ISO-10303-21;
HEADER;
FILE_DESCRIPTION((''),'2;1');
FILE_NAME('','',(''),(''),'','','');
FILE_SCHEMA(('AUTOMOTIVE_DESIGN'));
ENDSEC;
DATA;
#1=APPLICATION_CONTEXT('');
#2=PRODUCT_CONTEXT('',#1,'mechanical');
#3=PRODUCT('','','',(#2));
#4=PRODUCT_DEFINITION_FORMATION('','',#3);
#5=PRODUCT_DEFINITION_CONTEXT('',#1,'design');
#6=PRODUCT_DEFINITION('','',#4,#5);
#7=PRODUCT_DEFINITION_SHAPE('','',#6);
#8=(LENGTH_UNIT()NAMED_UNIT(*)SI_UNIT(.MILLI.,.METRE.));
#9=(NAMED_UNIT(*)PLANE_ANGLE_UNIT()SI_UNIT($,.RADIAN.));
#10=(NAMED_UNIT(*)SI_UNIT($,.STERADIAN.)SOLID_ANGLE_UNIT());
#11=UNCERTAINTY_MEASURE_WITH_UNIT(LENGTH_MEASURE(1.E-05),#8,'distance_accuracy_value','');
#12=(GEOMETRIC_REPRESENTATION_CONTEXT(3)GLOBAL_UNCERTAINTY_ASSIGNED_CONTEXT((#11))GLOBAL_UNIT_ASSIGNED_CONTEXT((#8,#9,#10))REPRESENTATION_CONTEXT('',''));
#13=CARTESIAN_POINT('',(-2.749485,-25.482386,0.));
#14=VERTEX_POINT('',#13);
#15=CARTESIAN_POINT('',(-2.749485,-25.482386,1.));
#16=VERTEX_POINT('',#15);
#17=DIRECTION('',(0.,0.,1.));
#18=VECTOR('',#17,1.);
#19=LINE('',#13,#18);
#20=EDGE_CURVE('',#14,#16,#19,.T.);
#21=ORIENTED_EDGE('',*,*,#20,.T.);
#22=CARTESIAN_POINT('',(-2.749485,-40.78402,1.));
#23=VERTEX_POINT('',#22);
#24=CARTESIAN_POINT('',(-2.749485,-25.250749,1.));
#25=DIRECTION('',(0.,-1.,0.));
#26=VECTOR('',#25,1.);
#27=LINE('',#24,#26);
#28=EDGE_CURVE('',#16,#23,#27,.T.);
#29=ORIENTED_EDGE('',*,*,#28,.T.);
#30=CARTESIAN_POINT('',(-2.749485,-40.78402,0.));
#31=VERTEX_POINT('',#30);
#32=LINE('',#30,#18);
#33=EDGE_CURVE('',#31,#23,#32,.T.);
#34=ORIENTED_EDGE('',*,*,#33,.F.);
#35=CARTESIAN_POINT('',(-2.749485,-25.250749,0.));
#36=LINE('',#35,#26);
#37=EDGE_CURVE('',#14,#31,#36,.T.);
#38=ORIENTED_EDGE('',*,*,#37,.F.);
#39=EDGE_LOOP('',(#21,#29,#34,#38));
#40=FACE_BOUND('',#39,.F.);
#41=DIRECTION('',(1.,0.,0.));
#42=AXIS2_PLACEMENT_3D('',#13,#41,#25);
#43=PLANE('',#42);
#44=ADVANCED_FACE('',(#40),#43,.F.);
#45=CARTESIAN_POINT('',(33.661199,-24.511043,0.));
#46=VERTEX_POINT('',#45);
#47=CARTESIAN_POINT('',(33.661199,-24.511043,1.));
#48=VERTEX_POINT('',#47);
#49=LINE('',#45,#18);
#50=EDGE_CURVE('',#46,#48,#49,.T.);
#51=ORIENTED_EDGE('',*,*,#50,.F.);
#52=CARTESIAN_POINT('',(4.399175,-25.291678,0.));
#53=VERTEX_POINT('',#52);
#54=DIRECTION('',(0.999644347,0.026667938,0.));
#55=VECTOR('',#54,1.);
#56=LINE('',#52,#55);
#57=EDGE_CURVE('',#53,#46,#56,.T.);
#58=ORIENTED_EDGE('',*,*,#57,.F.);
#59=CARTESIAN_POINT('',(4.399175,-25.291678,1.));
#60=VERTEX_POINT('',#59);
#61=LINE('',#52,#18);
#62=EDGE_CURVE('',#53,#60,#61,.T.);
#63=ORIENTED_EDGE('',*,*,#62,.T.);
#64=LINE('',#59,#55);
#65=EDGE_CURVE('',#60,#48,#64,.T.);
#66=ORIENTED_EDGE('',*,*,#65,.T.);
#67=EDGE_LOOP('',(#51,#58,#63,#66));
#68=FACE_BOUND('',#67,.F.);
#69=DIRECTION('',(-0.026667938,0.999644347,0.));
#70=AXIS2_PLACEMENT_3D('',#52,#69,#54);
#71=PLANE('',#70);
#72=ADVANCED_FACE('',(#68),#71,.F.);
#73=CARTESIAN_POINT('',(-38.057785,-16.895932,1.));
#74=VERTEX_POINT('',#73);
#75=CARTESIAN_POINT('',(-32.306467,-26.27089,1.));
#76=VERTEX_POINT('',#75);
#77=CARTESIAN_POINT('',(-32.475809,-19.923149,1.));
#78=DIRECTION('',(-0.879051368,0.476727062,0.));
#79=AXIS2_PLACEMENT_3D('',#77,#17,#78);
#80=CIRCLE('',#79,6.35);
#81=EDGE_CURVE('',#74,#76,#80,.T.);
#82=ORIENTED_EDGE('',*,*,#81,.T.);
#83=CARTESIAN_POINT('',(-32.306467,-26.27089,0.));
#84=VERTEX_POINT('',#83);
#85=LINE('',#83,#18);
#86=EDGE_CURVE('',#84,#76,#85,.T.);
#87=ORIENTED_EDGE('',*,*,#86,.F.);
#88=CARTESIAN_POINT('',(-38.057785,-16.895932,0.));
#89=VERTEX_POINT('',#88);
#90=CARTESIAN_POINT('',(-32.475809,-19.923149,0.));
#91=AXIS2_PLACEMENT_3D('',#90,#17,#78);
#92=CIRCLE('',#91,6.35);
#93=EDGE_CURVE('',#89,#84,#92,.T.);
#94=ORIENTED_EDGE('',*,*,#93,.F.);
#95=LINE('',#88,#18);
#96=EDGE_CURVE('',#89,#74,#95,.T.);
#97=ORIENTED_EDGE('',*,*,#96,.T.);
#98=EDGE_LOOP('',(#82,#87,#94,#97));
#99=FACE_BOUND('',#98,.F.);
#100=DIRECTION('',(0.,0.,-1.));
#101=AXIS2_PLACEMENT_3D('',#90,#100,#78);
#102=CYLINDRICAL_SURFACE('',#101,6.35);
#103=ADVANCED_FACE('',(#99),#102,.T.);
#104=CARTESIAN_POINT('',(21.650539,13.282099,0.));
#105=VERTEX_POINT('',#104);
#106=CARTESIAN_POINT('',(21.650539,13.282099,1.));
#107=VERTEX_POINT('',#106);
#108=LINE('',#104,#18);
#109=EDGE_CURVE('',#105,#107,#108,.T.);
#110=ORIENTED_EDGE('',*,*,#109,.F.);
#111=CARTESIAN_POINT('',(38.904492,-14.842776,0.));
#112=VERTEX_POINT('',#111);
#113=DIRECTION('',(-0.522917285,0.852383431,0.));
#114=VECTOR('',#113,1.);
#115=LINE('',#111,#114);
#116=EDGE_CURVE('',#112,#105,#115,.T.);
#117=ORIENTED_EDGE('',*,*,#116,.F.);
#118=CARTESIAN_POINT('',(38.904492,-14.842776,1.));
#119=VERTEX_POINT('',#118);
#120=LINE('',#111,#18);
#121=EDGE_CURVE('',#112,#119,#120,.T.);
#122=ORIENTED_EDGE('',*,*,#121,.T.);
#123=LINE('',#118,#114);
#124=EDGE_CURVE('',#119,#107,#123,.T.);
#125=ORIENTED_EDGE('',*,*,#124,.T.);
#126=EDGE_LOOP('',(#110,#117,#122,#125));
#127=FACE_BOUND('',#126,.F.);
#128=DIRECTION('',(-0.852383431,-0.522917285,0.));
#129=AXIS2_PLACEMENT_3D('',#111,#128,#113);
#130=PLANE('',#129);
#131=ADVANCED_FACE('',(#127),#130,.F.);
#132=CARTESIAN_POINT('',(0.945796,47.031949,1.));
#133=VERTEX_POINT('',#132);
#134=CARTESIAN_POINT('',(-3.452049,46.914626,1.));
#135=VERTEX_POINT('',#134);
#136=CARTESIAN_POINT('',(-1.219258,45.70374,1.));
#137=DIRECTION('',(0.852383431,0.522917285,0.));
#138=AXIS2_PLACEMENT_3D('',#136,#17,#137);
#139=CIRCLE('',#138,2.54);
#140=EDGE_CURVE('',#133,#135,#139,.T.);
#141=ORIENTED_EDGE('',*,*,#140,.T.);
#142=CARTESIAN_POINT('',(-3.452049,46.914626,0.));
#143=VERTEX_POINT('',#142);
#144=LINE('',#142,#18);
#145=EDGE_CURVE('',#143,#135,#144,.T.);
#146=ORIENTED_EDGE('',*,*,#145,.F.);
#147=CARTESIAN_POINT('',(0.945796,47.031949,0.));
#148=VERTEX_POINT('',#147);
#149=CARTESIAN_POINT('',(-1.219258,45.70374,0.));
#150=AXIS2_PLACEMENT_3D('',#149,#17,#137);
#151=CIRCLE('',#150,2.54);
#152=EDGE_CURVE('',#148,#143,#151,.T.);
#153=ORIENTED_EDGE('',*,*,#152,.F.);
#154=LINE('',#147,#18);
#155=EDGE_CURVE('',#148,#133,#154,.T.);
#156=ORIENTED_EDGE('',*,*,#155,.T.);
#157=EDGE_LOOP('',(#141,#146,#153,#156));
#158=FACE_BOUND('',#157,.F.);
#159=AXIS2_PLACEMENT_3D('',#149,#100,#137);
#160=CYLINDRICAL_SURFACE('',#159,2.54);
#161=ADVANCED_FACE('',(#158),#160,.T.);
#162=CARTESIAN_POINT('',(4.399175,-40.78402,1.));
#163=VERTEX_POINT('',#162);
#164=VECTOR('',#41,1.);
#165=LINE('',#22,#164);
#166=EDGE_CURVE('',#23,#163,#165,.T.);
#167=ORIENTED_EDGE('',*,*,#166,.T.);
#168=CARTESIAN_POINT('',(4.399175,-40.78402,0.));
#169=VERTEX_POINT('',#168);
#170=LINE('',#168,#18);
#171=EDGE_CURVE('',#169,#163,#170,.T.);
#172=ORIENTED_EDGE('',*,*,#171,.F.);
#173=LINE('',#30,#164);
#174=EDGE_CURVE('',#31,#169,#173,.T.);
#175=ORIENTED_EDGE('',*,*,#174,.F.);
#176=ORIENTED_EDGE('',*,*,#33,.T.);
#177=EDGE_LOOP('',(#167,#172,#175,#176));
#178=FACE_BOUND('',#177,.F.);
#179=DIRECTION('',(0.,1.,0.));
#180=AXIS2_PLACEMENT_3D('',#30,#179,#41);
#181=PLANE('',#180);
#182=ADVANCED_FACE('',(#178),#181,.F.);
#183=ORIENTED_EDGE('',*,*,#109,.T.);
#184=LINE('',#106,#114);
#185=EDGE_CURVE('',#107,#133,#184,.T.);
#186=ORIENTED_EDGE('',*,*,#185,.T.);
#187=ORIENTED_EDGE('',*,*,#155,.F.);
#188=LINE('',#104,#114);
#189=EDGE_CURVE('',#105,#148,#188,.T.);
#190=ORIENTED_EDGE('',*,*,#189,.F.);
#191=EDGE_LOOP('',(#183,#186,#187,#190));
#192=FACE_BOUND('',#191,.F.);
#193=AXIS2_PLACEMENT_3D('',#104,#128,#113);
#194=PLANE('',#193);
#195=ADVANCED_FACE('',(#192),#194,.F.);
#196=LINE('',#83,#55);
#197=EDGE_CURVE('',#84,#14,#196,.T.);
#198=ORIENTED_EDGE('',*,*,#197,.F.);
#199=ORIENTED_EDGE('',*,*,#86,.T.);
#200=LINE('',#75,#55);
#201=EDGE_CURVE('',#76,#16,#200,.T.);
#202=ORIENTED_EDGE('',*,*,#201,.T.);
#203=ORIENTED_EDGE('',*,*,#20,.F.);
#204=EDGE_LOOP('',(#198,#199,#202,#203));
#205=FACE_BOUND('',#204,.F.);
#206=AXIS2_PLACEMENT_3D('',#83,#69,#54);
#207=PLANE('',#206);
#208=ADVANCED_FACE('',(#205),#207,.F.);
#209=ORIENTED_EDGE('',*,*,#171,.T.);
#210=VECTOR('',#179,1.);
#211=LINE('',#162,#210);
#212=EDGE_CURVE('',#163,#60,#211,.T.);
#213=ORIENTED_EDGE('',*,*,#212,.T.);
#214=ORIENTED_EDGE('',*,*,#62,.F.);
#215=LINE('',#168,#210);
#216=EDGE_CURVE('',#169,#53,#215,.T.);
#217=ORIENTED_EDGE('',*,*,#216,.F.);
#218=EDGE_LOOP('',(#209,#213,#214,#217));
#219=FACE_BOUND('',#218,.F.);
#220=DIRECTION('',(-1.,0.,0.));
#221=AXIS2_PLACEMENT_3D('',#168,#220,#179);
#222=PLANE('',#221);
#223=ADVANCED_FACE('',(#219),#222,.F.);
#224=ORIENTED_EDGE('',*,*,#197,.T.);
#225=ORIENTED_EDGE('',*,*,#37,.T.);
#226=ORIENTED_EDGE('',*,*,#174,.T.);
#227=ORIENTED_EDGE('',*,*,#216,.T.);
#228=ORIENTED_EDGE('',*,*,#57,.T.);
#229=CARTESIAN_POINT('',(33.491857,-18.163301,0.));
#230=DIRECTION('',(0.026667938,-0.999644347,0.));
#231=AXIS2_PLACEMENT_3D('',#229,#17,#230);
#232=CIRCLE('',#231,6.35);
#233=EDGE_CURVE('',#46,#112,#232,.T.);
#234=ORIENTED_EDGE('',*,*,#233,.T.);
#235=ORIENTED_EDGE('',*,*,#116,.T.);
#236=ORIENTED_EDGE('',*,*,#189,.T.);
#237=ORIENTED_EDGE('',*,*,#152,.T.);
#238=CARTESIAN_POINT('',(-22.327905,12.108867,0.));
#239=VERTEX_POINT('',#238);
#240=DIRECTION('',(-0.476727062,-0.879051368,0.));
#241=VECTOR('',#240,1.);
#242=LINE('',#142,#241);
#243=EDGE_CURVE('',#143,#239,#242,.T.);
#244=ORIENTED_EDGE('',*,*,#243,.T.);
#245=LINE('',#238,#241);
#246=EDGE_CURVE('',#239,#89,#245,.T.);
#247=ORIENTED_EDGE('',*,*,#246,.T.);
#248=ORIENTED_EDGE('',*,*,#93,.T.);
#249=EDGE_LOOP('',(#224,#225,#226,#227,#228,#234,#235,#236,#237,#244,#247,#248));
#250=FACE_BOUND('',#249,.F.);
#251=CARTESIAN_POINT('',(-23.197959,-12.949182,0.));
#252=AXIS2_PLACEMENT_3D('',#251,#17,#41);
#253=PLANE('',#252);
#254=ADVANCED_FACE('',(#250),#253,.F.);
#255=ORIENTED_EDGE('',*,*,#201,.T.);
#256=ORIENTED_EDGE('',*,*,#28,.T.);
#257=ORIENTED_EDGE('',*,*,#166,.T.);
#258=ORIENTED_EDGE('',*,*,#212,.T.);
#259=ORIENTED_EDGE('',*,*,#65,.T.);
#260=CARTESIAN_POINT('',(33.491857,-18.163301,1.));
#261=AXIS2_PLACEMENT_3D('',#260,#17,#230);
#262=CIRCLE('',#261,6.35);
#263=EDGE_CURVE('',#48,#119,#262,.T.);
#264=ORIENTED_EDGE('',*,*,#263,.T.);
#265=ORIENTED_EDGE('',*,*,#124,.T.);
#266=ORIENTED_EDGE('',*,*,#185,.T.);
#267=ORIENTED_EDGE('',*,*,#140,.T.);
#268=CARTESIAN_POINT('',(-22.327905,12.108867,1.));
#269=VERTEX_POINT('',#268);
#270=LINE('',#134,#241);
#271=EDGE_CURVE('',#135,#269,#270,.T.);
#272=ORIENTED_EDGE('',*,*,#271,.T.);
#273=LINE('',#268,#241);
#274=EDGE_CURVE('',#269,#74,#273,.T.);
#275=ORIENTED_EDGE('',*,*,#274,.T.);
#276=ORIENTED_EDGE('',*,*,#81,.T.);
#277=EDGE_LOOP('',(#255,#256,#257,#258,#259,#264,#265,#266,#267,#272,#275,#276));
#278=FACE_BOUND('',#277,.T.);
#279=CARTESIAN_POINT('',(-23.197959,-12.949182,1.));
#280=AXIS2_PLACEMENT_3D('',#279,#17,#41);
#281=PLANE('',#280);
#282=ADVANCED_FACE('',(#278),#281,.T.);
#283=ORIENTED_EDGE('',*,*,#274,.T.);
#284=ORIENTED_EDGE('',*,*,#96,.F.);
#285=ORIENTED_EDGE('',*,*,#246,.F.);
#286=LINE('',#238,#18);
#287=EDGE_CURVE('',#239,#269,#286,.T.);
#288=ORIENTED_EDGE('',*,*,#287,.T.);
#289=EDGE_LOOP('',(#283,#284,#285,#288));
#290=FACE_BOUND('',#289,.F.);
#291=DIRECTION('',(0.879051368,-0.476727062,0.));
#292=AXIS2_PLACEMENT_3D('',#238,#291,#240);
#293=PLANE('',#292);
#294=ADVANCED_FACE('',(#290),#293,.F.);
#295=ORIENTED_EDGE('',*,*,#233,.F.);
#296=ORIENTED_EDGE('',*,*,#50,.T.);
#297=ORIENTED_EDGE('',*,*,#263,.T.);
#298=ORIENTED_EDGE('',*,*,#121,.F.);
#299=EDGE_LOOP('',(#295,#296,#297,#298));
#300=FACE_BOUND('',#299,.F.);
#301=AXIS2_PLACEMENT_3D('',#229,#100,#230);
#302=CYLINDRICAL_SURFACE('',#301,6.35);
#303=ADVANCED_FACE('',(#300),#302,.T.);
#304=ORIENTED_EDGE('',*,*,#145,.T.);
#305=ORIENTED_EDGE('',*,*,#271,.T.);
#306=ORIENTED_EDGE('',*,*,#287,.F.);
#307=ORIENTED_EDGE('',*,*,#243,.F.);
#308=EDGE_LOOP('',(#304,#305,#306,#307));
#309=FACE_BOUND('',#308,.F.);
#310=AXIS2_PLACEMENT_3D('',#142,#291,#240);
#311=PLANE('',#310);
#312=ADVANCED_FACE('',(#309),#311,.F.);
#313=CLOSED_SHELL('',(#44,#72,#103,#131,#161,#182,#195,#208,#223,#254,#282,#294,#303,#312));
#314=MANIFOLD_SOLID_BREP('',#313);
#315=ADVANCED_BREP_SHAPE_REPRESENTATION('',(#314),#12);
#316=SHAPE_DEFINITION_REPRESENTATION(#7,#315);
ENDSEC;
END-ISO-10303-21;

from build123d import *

# Parameters (mm, degrees)
F1_DEPTH = 1


# Not quite as in the source:
# - a feature names something its author has since deleted; it is built from what else it names


with BuildPart() as f1:
    # F0 (on Top) → F1 (new body)
    with BuildSketch(Plane.XY):
        with BuildLine():
            Line((-2.7494849637, -25.4823859731), (-2.7494849637, -25.250749146))
            ThreePointArc((-2.7494849637, -25.250749146), (-22.497868801, -11.7900763108), (-22.3279049811, 12.1088669642))
            Line((-22.3279049811, 12.1088669642), (-38.057784897, -16.8959317215))
            ThreePointArc((-38.057784897, -16.8959317215), (-37.8884434924, -23.2436733268), (-32.3064673032, -26.2708901713))
            Line((-32.3064673032, -26.2708901713), (-2.7494849637, -25.4823859731))
        make_face()
        with BuildLine():
            ThreePointArc((25.4, 0), (19.4537790742, -16.3312730591), (4.3991748244, -25.0161400073))
            Line((4.3991748244, -25.0161400073), (4.3991748244, -25.2916781332))
            Line((4.3991748244, -25.2916781332), (33.6611985399, -24.5110426718))
            ThreePointArc((33.6611985399, -24.5110426718), (39.0738333245, -21.1905179108), (38.9044919199, -14.8427763054))
            Line((38.9044919199, -14.8427763054), (21.6505391613, 13.2820990068))
            ThreePointArc((21.6505391613, 13.2820990068), (24.4446690988, 6.9005907466), (25.4, 0))
        make_face()
        with BuildLine():
            ThreePointArc((-22.3279049811, 12.1088669642), (-22.497868801, -11.7900763108), (-2.7494849637, -25.250749146))
            ThreePointArc((-2.7494849637, -25.250749146), (0.8331443579, -25.3863323558), (4.3991748244, -25.0161400073))
            ThreePointArc((4.3991748244, -25.0161400073), (19.4537790742, -16.3312730591), (25.4, 0))
            ThreePointArc((25.4, 0), (24.4446690988, 6.9005907466), (21.6505391613, 13.2820990068))
            ThreePointArc((21.6505391613, 13.2820990068), (-0.6773658317, 25.3909664158), (-22.3279049811, 12.1088669642))
        make_face()
        with BuildLine():
            Line((-3.4520485887, 46.9146262965), (-22.3279049811, 12.1088669642))
            ThreePointArc((-22.3279049811, 12.1088669642), (-0.6773658317, 25.3909664158), (21.6505391613, 13.2820990068))
            Line((21.6505391613, 13.2820990068), (0.9457958008, 47.0319494631))
            ThreePointArc((0.9457958008, 47.0319494631), (-1.2869946749, 48.2428362009), (-3.4520485887, 46.9146262965))
        make_face()
        with BuildLine():
            ThreePointArc((4.3991748244, -25.0161400073), (0.8331443579, -25.3863323558), (-2.7494849637, -25.250749146))
            Line((-2.7494849637, -25.250749146), (-2.7494849637, -25.4823859731))
            Line((-2.7494849637, -25.4823859731), (-2.7494849637, -40.7840199769))
            Line((-2.7494849637, -40.7840199769), (4.3991748244, -40.7840199769))
            Line((4.3991748244, -40.7840199769), (4.3991748244, -25.2916781332))
            Line((4.3991748244, -25.2916781332), (4.3991748244, -25.0161400073))
        make_face()
    extrude(amount=F1_DEPTH)


solid = f1.part
